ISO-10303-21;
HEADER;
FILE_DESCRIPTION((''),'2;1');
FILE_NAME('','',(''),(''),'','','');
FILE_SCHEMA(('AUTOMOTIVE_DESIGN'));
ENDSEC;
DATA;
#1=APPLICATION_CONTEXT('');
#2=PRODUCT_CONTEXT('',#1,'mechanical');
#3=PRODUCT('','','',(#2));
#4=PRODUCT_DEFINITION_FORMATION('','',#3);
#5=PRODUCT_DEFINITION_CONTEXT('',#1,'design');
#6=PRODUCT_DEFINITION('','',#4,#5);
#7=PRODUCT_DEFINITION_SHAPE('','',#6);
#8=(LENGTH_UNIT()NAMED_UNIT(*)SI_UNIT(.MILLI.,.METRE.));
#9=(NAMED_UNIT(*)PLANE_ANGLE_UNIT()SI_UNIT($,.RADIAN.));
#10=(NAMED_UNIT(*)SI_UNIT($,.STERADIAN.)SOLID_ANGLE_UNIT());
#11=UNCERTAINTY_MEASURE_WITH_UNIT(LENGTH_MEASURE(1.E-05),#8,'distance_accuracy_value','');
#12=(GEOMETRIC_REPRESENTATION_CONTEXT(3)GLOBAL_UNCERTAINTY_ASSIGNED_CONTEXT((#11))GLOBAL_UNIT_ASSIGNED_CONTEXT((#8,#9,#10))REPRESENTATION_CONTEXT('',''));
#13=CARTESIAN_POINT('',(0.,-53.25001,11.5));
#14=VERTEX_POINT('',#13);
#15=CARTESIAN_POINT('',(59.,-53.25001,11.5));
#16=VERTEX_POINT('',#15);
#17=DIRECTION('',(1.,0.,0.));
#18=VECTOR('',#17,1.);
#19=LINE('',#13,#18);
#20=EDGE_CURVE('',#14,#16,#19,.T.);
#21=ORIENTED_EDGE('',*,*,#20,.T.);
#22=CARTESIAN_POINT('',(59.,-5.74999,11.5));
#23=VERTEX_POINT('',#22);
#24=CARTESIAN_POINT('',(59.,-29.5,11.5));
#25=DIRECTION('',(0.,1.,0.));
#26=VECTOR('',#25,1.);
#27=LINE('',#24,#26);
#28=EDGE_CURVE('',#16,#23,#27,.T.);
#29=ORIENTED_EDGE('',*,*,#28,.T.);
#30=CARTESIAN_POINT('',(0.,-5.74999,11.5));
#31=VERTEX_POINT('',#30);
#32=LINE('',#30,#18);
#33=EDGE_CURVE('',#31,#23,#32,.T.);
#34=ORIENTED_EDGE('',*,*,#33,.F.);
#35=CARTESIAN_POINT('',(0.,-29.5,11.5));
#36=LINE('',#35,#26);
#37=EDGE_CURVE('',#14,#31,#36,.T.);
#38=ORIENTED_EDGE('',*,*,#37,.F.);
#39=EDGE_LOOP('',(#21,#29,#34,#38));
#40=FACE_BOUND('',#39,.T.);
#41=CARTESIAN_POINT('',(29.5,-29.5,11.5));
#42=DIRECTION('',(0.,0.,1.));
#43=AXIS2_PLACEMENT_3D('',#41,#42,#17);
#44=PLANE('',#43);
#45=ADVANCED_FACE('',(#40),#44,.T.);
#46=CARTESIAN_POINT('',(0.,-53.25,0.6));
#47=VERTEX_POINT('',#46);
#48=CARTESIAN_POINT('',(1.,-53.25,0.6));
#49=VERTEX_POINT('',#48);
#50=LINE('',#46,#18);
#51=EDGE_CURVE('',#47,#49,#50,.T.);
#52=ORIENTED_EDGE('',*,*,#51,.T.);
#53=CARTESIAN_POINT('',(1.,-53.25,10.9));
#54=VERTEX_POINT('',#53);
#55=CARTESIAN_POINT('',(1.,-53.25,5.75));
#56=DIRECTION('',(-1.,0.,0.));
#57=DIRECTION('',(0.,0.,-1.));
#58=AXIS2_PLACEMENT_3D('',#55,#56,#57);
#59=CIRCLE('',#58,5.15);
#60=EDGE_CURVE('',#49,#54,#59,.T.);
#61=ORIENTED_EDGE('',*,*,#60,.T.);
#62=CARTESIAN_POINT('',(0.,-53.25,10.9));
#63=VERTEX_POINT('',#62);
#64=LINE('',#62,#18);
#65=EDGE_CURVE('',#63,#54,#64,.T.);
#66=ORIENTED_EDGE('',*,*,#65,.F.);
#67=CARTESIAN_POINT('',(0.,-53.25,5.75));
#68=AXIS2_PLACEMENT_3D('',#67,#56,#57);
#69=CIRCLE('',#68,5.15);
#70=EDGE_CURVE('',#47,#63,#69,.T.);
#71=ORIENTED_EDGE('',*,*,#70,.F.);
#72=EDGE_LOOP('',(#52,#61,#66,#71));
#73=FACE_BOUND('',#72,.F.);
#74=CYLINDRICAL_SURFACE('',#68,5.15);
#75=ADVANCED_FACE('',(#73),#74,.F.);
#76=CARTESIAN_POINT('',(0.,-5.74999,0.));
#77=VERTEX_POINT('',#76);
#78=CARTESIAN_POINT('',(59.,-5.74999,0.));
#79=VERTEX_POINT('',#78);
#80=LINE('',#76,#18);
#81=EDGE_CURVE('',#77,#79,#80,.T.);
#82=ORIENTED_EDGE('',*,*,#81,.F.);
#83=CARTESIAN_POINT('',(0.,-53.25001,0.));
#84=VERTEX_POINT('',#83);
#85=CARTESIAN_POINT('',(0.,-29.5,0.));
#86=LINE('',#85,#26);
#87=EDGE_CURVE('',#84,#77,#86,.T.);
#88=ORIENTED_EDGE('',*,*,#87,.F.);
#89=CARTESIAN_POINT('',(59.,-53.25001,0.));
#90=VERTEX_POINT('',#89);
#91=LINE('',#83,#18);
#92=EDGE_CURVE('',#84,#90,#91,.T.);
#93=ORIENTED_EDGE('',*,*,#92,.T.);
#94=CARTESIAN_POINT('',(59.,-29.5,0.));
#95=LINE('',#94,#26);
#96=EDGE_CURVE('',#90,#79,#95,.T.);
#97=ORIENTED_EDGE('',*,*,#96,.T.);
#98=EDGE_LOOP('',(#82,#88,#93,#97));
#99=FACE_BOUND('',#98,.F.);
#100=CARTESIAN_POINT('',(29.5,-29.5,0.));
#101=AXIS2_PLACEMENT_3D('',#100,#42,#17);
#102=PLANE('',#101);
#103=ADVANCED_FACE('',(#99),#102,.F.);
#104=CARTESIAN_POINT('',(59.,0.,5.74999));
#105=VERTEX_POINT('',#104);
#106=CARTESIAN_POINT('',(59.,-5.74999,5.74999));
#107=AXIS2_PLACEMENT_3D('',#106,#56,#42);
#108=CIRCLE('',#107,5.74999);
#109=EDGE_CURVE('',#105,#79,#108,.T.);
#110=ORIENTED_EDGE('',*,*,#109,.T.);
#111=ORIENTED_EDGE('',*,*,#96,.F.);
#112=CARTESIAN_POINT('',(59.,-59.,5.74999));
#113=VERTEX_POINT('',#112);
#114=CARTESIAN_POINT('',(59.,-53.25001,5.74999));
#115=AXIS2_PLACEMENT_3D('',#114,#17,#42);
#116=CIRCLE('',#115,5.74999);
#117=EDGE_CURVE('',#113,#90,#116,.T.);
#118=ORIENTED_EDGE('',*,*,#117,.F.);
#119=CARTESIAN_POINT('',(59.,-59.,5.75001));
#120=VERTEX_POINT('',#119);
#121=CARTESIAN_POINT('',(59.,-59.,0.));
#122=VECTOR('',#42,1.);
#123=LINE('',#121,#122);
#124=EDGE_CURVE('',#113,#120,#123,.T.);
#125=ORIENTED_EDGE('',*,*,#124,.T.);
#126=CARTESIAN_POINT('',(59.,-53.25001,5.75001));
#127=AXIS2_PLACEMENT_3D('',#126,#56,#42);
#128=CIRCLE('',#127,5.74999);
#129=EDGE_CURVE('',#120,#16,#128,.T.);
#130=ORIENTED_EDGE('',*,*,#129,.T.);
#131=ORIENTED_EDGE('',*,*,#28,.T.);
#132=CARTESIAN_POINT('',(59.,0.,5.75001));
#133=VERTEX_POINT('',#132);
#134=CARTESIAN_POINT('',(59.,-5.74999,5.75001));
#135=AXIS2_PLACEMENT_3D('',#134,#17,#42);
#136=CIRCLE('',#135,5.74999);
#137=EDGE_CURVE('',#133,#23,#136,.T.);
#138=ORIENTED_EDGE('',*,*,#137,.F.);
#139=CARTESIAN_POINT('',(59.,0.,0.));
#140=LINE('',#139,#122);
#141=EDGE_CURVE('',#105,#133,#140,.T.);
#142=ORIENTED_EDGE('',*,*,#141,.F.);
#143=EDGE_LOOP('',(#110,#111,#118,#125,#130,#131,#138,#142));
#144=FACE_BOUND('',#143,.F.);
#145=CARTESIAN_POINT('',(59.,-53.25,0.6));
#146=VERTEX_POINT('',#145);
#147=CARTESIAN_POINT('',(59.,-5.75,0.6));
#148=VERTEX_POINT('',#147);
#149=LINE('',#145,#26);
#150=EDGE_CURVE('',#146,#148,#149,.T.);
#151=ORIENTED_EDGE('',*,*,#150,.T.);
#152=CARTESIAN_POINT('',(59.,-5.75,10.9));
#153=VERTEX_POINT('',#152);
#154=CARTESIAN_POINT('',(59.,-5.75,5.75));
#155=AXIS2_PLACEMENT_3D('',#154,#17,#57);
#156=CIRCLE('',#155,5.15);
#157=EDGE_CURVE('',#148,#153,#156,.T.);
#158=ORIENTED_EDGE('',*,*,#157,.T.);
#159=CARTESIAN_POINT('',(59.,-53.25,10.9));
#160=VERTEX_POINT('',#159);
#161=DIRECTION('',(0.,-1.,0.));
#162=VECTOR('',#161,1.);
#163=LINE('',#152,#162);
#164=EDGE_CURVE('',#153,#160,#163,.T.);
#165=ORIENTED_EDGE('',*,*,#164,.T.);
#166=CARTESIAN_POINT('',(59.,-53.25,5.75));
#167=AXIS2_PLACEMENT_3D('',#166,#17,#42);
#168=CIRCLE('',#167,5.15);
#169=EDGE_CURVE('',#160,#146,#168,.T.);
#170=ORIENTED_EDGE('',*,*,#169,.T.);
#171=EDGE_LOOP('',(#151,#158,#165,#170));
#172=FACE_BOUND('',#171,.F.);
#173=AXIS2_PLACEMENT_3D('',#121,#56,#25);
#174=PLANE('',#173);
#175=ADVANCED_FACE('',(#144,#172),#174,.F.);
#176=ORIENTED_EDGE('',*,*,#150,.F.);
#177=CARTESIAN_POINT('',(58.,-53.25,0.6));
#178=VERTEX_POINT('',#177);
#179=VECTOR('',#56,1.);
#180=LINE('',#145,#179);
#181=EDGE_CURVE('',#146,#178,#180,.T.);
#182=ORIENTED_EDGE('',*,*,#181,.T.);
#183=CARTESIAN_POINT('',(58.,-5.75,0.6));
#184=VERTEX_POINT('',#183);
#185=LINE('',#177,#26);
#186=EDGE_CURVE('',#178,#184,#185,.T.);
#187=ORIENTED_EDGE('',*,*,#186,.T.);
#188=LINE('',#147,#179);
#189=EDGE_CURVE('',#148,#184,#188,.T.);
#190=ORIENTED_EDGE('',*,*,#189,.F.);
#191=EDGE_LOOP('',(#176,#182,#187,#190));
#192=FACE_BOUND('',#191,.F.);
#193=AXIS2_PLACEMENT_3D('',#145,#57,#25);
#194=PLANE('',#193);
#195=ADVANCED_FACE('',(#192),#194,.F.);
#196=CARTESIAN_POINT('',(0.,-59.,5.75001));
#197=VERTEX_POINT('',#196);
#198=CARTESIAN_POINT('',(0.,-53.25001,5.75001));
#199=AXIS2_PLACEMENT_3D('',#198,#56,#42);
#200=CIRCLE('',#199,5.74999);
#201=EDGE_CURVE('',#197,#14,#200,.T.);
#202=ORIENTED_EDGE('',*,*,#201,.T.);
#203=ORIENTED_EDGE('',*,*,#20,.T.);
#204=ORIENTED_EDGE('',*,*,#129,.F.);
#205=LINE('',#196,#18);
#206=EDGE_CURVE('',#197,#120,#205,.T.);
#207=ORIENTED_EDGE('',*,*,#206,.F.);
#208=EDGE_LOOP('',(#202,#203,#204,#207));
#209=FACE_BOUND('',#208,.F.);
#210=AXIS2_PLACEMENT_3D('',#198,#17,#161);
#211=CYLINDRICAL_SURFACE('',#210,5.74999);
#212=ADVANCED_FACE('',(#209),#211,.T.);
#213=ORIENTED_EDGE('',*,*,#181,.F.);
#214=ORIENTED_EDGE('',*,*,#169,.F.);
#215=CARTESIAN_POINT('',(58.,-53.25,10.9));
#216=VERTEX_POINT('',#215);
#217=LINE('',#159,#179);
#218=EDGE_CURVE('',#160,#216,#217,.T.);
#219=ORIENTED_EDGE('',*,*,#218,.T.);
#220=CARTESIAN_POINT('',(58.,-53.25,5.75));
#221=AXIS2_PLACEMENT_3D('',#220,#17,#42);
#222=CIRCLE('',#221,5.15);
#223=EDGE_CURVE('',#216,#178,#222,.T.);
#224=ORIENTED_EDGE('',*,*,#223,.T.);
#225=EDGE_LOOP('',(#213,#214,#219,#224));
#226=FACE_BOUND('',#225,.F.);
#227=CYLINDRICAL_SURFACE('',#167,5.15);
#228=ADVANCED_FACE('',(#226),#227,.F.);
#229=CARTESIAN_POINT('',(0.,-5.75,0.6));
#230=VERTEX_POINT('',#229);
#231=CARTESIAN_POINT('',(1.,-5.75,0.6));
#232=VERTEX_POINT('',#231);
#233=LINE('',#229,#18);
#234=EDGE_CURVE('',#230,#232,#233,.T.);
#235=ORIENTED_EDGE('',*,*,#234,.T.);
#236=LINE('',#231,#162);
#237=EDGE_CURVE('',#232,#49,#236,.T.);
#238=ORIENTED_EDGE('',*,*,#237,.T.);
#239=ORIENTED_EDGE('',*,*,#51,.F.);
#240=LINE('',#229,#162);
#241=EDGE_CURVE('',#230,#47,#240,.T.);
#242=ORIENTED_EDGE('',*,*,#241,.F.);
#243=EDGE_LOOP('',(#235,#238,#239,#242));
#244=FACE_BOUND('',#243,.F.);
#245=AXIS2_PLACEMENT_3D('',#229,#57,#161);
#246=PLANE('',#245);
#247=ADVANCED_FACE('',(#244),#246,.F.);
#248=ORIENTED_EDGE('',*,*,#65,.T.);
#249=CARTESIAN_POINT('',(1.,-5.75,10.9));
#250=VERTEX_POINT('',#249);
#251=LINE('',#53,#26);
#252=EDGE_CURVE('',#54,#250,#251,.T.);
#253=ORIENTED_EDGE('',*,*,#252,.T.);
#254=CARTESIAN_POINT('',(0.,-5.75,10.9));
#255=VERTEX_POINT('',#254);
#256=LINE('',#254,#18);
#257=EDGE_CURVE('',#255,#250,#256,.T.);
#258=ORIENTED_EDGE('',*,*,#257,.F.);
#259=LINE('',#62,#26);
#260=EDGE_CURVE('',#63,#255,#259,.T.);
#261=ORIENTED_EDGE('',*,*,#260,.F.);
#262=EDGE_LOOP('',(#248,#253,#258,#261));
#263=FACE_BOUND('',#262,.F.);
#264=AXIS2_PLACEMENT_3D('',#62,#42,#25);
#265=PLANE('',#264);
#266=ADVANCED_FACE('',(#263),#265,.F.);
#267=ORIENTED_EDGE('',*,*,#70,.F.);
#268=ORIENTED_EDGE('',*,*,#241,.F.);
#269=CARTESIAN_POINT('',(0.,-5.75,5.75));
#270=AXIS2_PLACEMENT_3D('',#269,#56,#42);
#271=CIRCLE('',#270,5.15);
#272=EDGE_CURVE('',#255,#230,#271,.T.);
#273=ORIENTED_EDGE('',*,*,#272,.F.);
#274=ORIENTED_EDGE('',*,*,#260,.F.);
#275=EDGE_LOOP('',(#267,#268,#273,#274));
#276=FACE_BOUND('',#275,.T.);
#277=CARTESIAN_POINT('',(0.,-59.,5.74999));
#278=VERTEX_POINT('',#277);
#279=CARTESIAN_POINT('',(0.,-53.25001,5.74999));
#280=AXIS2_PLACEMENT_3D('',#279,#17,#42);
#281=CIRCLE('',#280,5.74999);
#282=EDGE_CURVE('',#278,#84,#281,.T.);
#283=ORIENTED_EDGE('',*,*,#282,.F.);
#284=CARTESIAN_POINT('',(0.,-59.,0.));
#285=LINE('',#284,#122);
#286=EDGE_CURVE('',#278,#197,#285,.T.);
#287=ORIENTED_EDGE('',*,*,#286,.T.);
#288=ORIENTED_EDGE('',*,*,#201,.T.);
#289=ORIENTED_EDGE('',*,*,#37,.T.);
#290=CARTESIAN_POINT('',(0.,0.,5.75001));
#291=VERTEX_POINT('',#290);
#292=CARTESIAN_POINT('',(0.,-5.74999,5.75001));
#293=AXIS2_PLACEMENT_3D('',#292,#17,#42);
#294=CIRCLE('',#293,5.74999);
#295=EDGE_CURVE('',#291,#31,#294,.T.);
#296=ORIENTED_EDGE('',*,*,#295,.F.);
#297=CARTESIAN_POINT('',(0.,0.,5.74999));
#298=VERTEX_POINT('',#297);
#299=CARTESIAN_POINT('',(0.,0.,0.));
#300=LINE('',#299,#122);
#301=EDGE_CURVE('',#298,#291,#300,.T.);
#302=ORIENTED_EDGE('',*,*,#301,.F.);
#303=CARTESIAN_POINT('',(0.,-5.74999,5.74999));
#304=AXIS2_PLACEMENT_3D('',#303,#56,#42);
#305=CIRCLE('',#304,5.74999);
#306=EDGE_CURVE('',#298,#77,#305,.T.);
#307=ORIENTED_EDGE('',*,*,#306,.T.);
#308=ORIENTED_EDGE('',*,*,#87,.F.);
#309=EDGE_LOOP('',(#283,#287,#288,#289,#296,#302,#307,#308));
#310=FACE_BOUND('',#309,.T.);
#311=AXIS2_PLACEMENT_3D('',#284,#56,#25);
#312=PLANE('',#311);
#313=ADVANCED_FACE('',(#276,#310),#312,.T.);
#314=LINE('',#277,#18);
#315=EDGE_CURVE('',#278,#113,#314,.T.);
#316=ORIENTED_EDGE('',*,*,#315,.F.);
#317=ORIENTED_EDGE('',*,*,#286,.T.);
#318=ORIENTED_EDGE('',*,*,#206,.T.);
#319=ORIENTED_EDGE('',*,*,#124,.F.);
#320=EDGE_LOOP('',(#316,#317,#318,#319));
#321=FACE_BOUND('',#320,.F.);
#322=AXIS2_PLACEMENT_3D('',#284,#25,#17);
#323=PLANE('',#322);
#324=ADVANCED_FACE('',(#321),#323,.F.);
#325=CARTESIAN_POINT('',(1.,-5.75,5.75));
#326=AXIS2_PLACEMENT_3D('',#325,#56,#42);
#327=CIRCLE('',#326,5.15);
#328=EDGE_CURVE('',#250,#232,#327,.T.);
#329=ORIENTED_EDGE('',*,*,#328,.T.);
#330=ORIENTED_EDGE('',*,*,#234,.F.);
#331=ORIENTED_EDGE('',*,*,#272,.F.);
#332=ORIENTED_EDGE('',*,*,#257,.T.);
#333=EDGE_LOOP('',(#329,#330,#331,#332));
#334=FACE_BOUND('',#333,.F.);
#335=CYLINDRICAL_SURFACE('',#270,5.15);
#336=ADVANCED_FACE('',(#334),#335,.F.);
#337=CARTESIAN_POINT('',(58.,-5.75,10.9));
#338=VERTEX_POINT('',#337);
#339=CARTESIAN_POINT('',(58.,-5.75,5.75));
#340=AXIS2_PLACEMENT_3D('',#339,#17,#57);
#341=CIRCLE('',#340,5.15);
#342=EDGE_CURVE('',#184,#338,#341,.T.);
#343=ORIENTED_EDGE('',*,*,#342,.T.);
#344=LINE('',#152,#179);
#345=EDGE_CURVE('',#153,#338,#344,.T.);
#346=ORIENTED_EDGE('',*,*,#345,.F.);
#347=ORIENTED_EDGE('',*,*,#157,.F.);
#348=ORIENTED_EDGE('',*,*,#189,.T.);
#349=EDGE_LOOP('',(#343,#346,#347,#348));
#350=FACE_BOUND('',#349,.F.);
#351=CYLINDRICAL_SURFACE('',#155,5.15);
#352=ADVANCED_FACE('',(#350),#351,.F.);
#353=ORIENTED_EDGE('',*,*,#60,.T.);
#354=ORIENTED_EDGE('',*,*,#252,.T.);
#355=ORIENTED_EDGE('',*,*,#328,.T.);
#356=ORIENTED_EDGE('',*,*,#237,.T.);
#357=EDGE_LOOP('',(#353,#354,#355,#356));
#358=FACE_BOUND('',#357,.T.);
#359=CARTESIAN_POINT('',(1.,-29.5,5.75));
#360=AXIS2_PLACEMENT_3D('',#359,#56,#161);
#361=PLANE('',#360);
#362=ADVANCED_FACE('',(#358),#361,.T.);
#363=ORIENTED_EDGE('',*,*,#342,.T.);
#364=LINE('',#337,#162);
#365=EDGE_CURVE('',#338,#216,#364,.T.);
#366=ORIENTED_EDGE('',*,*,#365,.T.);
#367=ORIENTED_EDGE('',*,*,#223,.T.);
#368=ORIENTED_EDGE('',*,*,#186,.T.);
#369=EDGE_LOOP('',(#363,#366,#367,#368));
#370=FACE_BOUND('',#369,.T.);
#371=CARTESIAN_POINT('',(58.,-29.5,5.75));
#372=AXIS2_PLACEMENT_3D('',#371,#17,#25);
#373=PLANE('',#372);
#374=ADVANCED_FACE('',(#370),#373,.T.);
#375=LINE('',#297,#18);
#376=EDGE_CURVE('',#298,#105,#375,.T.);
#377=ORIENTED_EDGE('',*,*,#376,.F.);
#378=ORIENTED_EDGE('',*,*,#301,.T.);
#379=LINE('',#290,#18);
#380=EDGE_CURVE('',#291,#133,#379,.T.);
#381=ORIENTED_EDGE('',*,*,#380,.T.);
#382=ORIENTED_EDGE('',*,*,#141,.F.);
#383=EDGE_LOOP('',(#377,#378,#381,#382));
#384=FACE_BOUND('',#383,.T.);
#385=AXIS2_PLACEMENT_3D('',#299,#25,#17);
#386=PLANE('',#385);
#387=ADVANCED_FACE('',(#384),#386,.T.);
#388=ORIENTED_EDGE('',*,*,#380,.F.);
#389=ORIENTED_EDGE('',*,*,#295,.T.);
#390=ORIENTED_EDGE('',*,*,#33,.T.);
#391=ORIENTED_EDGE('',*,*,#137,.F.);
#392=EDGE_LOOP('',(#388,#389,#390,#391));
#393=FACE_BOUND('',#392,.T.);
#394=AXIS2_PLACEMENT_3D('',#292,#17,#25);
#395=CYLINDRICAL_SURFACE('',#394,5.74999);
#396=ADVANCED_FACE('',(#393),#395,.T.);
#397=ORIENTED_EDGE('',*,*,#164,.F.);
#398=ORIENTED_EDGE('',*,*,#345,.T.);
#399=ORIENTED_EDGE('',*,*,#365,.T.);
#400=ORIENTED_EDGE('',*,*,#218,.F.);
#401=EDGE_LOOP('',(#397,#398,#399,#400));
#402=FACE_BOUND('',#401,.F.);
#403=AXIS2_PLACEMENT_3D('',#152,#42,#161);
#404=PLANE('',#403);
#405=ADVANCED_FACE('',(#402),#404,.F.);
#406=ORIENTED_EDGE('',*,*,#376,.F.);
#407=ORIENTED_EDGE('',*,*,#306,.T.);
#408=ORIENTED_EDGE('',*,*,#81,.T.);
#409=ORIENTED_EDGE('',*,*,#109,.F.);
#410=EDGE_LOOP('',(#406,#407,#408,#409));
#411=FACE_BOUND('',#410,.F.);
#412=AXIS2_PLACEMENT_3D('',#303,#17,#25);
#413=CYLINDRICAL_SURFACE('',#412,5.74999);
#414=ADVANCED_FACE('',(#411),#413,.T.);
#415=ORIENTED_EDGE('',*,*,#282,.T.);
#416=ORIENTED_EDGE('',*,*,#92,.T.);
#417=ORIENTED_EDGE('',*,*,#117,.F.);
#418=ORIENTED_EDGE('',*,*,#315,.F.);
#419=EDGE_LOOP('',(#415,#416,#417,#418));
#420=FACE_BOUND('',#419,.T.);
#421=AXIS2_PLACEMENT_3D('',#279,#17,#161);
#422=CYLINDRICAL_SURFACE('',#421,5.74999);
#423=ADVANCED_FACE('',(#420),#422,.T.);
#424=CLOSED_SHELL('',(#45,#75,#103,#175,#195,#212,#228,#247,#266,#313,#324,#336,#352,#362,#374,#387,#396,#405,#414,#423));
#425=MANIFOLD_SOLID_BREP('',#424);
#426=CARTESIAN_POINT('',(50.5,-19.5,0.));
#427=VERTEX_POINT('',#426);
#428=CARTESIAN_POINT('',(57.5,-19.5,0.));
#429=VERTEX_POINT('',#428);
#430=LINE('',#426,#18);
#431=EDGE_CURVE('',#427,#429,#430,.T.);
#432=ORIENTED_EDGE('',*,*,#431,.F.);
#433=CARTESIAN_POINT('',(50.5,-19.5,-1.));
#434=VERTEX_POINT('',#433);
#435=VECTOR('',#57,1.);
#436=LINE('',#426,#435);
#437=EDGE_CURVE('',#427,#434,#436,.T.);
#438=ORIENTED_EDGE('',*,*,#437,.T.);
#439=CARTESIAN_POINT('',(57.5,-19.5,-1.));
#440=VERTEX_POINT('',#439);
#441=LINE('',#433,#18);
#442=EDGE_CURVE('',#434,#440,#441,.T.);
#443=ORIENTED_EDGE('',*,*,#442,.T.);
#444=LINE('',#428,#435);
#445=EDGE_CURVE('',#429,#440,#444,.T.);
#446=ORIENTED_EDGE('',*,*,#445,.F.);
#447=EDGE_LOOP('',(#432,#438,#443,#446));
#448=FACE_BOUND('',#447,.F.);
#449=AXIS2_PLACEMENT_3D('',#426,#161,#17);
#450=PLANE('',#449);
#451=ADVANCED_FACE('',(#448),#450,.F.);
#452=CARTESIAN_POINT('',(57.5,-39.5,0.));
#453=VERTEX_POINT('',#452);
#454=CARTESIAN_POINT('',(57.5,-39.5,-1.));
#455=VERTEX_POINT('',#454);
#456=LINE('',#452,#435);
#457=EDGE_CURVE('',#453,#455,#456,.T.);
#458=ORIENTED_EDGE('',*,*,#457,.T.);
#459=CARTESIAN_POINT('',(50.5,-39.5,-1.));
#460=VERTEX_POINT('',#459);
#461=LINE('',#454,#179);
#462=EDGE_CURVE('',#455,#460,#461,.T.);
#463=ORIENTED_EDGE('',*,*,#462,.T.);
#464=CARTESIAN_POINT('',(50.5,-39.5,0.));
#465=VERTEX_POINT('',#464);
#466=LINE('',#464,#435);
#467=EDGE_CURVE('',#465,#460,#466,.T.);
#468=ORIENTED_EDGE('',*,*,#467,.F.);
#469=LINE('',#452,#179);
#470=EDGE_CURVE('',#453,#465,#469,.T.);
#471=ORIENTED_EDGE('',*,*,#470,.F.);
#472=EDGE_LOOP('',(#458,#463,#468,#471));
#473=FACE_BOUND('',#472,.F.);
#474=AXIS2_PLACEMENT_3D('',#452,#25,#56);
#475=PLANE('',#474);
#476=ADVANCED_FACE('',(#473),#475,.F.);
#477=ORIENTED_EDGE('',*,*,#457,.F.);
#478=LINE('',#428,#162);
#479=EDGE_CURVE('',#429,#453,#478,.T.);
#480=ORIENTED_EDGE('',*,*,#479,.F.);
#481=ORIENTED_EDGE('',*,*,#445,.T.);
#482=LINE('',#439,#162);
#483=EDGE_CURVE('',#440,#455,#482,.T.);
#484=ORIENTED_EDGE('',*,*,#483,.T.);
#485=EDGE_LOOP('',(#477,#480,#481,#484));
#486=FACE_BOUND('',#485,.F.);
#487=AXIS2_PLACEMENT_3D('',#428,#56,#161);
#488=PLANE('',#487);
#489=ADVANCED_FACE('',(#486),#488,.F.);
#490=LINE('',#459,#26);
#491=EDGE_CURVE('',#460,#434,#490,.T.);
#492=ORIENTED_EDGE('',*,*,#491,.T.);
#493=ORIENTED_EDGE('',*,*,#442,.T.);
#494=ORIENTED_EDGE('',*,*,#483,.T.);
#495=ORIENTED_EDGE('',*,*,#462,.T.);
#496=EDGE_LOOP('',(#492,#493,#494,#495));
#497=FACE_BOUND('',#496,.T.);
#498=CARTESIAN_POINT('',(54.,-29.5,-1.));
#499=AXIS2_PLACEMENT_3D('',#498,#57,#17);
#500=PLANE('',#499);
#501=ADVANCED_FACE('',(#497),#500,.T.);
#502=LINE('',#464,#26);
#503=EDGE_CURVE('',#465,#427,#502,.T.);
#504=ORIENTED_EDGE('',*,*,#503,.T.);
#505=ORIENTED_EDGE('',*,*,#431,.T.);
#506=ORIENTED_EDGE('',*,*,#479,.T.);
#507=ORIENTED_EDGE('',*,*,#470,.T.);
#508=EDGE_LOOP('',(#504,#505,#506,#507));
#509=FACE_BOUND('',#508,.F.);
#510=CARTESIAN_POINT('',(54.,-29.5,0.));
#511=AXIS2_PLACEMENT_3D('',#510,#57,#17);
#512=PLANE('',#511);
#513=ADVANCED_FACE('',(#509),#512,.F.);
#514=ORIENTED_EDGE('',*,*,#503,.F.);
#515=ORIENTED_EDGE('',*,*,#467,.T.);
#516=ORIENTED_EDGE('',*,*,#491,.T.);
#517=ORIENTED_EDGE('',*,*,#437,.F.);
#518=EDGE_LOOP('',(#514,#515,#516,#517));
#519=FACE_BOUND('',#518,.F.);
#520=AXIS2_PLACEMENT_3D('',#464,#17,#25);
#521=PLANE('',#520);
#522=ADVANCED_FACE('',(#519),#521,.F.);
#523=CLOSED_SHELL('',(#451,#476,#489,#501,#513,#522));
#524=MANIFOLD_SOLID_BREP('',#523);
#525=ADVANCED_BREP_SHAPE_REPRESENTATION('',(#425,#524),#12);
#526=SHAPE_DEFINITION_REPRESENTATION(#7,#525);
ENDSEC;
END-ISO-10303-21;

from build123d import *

# Parameters (mm, degrees)
F0_W     = 59
F0_H     = 59
F1_DEPTH = 11.5
F2_R     = 5.74999
F4_DEPTH = 1
F6_DEPTH = 1
F8_DEPTH = 1


# Not quite as in the source:
# - a fillet or chamfer is up to 0.001 mm smaller than in the source, because OpenCascade refuses the exact size


with BuildPart() as f1:
    # F0 (on Top) → F1 (new body)
    with BuildSketch(Plane.XY):
        with Locations((29.5, -29.5)):
            Rectangle(F0_W, F0_H)
    extrude(amount=F1_DEPTH)

    # F2 (radius 5.75 in the source; OpenCascade refuses exactly that, so slightly less here)
    f2_edges = [f1.edges().sort_by_distance(p)[0] for p in [
        (29.5, -59, 11.5),
        (29.5, -59, 0),
        (29.5, 0, 11.5),
        (29.5, 0, 0),
    ]]
    fillet(f2_edges, radius=F2_R)

    # F3 (on face) → F4 (cut)
    with BuildSketch(Plane.YZ.offset(59)):
        with BuildLine():
            ThreePointArc((-5.75, 0.5999998897), (-0.5999998897, 5.75), (-5.75, 10.9000001103))
            Line((-5.75, 10.9000001103), (-53.25, 10.9000001103))
            ThreePointArc((-53.25, 10.9000001103), (-58.4000001103, 5.75), (-53.25, 0.5999998897))
            Line((-53.25, 0.5999998897), (-5.75, 0.5999998897))
        make_face()
    extrude(amount=-F4_DEPTH, mode=Mode.SUBTRACT)

    # F5 (on face) → F6 (cut)
    with BuildSketch(Plane(origin=(0, 0, 0), x_dir=(0, -1, 0), z_dir=(-1, 0, 0))):
        with BuildLine():
            Line((53.25, 10.9), (5.75, 10.9))
            ThreePointArc((5.75, 10.9), (0.6, 5.75), (5.75, 0.6))
            Line((5.75, 0.6), (53.25, 0.6))
            ThreePointArc((53.25, 0.6), (58.4, 5.75), (53.25, 10.9))
        make_face()
    extrude(amount=-F6_DEPTH, mode=Mode.SUBTRACT)


with BuildPart() as f8:
    # F7 (on face) → F8 (new body)
    with BuildSketch(Plane(origin=(0, 0, 0), x_dir=(1, 0, 0), z_dir=(0, 0, -1))):
        Polygon((57.5, 39.5), (50.5, 39.5), (50.5, 19.5), (57.5, 19.5), (57.5, 29.5), align=None)
    extrude(amount=F8_DEPTH)


solid = Compound([f1.part, f8.part])
